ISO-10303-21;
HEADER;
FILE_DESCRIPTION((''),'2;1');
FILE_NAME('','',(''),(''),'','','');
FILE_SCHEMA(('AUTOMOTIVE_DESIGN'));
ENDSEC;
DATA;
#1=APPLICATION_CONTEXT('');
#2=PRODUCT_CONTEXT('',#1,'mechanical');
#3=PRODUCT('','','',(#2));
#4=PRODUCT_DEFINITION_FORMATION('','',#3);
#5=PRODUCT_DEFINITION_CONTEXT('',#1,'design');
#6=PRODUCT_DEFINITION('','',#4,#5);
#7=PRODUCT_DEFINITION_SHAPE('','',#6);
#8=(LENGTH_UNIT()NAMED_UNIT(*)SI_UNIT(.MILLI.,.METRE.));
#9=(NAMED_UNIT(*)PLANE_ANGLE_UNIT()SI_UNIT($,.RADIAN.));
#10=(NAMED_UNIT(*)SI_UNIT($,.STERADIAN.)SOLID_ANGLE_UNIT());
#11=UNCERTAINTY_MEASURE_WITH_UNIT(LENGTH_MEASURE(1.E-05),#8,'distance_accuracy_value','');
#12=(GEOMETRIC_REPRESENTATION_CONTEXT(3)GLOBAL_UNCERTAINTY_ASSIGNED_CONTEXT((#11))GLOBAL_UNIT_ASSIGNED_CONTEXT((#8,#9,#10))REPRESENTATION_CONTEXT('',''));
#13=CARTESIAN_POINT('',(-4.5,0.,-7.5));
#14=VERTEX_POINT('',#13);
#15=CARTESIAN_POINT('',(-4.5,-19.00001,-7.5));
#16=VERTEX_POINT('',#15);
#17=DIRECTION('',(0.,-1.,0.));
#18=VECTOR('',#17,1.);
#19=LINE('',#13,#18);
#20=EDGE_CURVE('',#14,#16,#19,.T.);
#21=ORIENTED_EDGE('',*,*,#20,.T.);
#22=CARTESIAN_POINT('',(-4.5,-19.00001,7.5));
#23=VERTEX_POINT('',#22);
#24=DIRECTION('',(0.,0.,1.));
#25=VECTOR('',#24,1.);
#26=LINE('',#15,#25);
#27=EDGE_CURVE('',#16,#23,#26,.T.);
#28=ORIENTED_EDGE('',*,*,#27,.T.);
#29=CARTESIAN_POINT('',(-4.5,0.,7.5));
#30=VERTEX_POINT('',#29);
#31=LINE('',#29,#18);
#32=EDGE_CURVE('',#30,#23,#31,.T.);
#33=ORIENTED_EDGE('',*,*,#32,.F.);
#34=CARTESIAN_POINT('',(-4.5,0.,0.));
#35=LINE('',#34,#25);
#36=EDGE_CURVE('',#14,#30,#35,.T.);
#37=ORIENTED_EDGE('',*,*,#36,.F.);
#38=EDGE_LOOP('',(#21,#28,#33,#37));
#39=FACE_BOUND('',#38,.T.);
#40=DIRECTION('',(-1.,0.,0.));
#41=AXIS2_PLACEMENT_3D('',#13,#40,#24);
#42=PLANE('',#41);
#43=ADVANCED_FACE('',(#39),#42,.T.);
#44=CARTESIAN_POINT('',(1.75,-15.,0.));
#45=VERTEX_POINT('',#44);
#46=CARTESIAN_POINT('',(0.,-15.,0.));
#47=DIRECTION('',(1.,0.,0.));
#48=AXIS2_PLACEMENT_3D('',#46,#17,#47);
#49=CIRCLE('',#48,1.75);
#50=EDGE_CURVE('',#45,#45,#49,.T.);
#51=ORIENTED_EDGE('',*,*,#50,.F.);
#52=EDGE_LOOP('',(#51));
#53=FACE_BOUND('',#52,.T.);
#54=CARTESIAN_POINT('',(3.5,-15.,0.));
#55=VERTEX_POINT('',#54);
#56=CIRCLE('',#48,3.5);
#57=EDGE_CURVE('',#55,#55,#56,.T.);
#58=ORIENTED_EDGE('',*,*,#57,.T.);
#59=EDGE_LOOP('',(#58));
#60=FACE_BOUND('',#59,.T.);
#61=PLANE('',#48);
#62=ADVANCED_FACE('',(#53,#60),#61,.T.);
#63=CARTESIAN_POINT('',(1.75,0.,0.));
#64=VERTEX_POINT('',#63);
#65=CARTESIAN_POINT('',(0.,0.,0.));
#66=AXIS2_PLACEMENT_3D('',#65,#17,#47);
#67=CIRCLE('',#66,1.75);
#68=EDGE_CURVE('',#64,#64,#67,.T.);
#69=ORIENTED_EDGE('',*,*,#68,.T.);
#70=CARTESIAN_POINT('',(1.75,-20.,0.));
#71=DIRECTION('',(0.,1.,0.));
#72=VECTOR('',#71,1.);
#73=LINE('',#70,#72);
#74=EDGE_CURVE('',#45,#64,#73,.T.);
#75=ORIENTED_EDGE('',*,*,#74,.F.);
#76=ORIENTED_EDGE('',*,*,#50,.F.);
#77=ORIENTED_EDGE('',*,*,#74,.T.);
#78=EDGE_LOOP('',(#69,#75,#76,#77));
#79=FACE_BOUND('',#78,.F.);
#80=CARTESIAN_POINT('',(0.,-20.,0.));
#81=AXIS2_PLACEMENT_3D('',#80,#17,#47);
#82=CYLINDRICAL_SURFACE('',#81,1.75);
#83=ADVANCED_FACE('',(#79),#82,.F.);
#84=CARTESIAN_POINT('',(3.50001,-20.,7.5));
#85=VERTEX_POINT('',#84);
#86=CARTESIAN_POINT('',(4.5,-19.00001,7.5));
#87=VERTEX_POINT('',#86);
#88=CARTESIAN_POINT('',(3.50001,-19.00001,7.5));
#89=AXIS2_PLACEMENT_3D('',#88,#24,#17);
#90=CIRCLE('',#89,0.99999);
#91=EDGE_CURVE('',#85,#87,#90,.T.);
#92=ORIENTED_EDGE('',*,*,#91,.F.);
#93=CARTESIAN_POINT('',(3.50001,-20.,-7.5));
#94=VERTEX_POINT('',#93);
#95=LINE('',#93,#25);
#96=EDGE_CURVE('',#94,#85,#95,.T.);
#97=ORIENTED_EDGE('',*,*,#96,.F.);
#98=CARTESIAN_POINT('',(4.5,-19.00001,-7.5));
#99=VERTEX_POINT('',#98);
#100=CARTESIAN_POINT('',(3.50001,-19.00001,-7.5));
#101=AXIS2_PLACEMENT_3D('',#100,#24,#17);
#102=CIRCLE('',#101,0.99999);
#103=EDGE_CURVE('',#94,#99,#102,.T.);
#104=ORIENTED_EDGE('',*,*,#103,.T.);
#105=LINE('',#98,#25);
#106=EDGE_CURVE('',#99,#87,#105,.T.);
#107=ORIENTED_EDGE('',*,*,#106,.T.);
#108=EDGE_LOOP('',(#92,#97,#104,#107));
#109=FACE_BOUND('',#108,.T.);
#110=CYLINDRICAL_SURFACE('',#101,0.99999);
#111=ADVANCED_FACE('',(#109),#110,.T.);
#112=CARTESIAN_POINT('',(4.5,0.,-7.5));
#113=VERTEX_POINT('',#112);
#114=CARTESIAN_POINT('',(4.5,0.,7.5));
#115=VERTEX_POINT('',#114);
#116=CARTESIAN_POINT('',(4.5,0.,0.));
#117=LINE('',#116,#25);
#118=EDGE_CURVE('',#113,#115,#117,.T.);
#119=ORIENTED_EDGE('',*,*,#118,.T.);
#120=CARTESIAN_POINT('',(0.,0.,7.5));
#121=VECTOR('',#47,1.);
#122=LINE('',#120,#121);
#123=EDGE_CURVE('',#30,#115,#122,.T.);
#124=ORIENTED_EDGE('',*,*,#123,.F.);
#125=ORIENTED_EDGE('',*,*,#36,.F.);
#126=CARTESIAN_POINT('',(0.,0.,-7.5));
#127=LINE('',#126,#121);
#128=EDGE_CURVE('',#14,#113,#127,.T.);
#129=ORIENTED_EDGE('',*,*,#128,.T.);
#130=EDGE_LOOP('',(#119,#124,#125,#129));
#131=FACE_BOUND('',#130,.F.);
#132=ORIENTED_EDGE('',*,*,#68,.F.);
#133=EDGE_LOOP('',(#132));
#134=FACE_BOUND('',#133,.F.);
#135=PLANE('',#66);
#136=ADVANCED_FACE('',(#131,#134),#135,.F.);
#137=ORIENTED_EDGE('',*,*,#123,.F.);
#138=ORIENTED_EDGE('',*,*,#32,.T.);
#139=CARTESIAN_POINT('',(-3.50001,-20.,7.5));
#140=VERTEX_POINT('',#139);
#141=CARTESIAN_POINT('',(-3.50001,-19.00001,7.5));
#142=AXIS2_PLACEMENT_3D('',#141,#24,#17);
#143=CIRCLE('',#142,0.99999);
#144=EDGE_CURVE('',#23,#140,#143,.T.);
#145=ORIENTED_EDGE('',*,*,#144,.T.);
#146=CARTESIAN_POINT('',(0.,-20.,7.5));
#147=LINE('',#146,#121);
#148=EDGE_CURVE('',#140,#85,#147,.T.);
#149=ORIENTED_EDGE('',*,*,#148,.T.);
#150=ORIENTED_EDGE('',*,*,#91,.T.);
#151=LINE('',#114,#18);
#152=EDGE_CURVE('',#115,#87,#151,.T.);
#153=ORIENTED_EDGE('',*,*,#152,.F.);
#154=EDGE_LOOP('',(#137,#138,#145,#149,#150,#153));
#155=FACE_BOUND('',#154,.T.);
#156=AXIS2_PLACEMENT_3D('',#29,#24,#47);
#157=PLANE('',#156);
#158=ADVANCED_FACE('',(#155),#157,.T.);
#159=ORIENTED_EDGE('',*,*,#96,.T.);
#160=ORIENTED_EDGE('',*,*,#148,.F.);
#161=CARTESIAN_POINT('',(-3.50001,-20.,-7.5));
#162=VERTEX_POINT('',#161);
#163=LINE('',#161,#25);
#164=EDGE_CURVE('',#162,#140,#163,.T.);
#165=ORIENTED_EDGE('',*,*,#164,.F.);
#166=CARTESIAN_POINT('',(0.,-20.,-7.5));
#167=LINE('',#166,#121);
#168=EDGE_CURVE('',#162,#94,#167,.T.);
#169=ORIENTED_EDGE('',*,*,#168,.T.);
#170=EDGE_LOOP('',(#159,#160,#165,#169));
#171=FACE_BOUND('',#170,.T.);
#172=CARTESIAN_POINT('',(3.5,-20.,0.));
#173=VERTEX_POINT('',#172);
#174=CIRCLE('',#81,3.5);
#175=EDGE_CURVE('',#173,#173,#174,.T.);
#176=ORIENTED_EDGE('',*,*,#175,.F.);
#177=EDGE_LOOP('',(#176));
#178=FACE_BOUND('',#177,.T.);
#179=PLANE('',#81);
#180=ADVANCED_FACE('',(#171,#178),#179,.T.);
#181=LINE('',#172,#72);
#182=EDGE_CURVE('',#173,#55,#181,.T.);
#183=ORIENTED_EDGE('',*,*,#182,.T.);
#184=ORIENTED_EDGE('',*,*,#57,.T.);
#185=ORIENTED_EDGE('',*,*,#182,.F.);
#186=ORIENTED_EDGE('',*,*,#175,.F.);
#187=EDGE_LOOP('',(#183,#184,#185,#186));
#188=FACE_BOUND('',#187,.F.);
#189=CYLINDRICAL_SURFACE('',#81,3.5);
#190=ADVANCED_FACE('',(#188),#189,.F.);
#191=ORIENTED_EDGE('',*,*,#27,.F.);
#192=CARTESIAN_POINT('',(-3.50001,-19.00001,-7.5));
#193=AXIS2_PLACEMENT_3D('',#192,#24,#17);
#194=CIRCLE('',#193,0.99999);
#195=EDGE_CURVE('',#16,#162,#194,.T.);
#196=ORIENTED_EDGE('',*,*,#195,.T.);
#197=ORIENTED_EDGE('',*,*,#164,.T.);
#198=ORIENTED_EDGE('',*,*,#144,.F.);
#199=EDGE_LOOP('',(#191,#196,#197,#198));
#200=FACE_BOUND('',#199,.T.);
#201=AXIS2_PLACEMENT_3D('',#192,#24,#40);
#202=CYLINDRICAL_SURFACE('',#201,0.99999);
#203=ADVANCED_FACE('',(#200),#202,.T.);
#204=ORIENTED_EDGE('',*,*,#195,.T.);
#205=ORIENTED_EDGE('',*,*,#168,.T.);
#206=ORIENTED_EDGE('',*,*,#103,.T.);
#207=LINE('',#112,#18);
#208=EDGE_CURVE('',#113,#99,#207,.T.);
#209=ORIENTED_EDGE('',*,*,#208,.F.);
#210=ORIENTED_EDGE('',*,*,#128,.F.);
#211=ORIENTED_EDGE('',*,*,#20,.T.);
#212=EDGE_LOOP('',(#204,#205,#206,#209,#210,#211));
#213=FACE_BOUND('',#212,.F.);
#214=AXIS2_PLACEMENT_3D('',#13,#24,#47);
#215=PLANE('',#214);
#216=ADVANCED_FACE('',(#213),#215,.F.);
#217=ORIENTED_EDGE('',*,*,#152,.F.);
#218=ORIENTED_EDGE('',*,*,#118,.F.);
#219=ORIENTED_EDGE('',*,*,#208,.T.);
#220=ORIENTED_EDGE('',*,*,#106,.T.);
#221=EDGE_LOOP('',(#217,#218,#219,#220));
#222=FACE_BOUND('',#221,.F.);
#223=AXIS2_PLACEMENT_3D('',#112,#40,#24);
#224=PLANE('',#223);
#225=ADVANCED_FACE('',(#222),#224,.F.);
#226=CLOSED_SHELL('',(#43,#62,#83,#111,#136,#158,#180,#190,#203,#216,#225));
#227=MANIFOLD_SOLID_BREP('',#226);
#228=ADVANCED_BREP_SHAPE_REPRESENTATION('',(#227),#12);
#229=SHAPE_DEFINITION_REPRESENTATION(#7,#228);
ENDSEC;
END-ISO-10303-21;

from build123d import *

# Parameters (mm, degrees)
F0_W     = 9
F0_H     = 15
F1_DEPTH = 20
F2_R     = 1.75
F3_DEPTH = 20.001
F4_R     = 3.5
F5_DEPTH = 5
F6_R     = 0.99999


# Not quite as in the source:
# - a fillet or chamfer is up to 0.001 mm smaller than in the source, because OpenCascade refuses the exact size


with BuildPart() as f1:
    # F0 (on Front) → F1 (new body)
    with BuildSketch(Plane.XZ):
        Rectangle(F0_W, F0_H)
    extrude(amount=F1_DEPTH)

    # F2 (on face) → F3 (cut, through all)
    with BuildSketch(Plane.XZ.offset(20)):
        Circle(F2_R)
    extrude(amount=-F3_DEPTH, mode=Mode.SUBTRACT)

    # F4 (on face) → F5 (cut)
    with BuildSketch(Plane.XZ.offset(20)):
        Circle(F4_R)
    extrude(amount=-F5_DEPTH, mode=Mode.SUBTRACT)

    # F6 (radius 1 in the source; OpenCascade refuses exactly that, so slightly less here)
    f6_edges = [f1.edges().sort_by_distance(p)[0] for p in [
        (4.5, -20, 0),
        (-4.5, -20, 0),
    ]]
    fillet(f6_edges, radius=F6_R)


solid = f1.part
